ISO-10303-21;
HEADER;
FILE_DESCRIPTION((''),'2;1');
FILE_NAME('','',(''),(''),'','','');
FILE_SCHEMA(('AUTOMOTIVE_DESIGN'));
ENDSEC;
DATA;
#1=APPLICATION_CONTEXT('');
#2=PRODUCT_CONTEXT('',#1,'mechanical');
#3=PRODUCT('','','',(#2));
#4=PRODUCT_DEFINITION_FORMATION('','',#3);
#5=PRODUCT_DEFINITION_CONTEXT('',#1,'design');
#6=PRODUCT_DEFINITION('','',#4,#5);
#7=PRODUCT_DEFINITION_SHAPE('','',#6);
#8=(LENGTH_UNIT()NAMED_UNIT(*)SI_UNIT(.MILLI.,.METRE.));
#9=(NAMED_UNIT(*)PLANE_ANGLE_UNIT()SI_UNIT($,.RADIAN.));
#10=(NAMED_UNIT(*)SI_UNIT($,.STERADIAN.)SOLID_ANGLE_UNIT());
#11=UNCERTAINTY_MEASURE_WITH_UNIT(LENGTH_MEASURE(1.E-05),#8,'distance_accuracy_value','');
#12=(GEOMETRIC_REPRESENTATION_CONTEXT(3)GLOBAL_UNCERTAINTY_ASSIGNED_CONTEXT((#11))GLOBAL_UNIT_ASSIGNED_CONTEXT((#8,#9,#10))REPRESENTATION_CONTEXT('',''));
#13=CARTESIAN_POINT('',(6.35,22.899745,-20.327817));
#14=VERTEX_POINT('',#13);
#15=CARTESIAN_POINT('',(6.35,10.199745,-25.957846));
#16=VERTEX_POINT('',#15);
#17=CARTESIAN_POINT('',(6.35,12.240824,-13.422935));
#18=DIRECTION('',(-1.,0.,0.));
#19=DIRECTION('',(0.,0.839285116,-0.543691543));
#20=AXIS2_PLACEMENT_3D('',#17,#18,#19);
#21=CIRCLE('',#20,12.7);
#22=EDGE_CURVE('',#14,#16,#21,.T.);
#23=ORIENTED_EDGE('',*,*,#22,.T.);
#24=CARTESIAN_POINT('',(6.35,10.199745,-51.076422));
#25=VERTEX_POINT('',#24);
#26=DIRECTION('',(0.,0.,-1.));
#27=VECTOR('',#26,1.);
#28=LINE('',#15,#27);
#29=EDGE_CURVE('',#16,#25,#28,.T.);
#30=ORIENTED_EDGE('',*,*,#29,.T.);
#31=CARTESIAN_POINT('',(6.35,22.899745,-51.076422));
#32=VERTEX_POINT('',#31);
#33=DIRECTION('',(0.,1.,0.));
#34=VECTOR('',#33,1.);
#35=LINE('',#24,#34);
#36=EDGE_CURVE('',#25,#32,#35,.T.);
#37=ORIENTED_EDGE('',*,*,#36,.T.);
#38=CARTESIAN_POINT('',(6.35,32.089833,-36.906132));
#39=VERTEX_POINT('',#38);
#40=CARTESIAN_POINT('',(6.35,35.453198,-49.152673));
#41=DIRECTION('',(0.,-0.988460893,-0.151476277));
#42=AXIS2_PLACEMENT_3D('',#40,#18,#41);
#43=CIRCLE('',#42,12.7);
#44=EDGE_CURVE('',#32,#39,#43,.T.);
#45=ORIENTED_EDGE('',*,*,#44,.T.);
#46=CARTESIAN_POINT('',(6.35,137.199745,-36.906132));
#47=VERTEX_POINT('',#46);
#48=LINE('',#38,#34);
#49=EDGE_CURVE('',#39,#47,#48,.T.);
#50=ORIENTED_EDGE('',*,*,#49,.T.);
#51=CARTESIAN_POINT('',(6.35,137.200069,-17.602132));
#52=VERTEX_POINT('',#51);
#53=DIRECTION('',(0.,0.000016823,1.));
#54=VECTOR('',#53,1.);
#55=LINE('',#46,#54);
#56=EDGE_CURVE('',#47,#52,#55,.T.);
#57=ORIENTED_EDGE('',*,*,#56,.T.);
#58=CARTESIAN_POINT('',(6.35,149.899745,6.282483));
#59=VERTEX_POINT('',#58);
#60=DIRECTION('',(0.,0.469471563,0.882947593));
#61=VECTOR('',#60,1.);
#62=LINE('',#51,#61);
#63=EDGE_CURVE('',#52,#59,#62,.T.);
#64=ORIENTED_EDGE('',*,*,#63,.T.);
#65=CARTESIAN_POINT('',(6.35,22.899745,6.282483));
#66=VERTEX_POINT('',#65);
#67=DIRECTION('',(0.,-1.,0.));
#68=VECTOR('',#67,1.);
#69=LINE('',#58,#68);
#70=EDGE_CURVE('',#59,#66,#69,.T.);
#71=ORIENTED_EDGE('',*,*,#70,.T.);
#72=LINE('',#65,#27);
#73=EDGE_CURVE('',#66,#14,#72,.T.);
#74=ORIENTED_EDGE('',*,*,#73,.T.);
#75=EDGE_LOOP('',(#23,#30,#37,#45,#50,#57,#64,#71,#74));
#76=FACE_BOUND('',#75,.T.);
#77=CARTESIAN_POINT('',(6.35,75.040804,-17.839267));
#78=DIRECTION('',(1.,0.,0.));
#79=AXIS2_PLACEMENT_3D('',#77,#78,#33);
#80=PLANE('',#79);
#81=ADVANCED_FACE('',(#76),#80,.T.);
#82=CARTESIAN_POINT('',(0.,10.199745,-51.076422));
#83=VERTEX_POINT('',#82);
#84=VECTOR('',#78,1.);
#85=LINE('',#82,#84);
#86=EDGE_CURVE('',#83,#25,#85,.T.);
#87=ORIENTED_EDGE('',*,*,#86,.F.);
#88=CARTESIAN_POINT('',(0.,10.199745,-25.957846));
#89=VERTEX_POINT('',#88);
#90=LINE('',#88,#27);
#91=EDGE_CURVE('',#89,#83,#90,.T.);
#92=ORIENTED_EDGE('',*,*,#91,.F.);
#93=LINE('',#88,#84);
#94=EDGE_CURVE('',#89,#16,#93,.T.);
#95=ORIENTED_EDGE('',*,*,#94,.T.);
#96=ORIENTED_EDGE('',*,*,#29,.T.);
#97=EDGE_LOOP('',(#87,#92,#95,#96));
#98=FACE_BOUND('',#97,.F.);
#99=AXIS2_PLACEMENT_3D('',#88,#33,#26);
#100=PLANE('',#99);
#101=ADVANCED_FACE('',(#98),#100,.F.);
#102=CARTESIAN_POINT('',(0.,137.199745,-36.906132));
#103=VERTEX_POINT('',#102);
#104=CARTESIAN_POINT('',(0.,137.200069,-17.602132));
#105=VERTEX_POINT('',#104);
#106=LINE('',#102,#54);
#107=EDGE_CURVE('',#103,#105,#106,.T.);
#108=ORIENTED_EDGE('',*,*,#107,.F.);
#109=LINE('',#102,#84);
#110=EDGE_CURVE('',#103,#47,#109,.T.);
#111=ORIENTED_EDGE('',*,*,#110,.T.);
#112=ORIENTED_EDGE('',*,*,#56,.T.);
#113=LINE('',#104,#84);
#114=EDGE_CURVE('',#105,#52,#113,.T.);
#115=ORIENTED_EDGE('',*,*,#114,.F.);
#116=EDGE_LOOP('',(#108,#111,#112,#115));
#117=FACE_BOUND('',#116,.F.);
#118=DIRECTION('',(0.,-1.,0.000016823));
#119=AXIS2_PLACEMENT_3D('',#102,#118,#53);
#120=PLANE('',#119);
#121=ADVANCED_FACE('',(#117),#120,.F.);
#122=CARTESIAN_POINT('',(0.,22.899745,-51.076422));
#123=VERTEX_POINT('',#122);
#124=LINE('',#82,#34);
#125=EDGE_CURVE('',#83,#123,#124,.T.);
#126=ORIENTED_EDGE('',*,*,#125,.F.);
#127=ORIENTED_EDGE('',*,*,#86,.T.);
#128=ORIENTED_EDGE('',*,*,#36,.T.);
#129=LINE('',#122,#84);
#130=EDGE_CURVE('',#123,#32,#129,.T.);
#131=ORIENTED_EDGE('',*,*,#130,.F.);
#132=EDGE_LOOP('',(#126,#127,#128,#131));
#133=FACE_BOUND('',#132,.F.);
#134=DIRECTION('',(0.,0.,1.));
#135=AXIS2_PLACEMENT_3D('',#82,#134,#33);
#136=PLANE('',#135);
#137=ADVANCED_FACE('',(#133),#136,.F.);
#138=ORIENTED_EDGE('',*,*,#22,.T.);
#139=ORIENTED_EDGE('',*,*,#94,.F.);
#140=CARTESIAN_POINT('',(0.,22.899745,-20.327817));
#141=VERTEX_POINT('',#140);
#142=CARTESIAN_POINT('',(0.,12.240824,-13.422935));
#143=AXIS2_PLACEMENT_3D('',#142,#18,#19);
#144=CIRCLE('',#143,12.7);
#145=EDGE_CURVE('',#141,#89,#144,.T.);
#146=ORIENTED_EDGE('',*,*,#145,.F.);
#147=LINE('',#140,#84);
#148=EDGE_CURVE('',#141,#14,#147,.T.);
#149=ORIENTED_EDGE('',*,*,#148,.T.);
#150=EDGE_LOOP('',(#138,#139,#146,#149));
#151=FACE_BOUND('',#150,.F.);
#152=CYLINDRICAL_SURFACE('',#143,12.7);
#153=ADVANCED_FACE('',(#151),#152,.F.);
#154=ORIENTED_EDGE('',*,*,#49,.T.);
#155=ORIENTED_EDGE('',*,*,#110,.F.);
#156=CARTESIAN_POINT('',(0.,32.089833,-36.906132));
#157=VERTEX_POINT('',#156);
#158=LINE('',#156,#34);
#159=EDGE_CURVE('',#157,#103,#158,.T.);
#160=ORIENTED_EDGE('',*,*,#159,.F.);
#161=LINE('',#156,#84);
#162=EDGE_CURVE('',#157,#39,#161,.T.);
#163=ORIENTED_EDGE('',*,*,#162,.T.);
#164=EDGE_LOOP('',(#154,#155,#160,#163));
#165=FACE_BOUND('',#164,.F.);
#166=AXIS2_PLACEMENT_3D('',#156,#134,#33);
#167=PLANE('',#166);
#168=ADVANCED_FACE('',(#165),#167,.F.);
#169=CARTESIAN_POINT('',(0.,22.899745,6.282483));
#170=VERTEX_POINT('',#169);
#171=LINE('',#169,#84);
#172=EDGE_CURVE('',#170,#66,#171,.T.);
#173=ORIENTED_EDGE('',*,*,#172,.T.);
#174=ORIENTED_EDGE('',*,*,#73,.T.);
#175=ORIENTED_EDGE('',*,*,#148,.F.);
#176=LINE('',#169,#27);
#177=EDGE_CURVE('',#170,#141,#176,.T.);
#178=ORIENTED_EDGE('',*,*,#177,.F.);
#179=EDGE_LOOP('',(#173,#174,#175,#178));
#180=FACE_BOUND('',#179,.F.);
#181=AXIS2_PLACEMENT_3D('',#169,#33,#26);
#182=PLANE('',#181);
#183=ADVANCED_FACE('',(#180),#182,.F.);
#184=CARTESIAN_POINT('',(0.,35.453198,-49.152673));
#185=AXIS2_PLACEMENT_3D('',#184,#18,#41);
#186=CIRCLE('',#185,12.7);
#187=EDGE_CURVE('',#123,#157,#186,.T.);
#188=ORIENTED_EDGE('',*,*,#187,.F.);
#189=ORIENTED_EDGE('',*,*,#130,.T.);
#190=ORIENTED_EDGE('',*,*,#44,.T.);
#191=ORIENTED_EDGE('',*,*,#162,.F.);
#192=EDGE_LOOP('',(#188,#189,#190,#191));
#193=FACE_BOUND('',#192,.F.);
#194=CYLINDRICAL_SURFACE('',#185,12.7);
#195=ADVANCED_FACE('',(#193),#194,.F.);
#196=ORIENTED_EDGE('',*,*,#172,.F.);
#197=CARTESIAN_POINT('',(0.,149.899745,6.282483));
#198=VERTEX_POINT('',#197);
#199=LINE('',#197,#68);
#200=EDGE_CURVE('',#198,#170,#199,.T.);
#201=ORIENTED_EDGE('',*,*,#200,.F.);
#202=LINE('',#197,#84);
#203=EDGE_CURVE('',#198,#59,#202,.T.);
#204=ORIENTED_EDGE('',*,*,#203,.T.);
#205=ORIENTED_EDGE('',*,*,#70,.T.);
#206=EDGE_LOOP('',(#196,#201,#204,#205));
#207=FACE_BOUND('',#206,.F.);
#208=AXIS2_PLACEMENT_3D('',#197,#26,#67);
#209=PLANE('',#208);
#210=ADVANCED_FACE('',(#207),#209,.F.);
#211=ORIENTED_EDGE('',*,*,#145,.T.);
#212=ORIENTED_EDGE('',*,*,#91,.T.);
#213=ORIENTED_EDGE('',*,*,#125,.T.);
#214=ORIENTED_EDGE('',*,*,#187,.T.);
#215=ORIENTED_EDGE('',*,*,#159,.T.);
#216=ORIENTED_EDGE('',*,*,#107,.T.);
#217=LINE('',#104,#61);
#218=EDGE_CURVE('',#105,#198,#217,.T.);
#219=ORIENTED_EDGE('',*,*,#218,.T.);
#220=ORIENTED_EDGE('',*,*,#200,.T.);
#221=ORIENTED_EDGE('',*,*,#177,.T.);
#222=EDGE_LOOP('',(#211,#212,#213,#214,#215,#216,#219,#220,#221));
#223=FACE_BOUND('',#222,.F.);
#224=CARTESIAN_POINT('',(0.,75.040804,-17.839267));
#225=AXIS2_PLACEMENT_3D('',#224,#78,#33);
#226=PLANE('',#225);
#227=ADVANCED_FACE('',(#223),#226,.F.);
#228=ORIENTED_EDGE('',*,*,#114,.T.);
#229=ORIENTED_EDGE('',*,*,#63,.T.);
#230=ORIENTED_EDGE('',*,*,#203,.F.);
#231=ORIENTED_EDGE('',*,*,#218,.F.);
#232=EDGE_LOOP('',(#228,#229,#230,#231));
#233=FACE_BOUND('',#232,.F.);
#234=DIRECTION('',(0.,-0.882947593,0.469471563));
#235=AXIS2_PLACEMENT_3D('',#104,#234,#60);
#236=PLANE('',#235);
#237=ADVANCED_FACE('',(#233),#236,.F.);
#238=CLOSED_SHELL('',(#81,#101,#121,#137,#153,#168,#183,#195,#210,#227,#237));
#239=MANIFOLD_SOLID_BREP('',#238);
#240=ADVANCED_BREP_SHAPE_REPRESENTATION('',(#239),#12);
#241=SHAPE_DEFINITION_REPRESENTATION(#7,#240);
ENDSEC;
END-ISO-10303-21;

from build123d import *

# Parameters (mm, degrees)
F1_DEPTH = 6.35


# Not quite as in the source:
# - a feature names something its author has since deleted; it is built from what else it names


with BuildPart() as f1:
    # F0 (on Right) → F1 (new body)
    with BuildSketch(Plane.YZ):
        with BuildLine():
            Line((10.1997445822, -25.9578457783), (10.1997445822, -51.0764221646))
            Line((10.1997445822, -51.0764221646), (22.8997445822, -51.0764221646))
            ThreePointArc((22.8997445822, -51.0764221646), (24.7978912955, -42.2422146629), (32.0898325185, -36.9061321742))
            Line((32.0898325185, -36.9061321742), (137.1997445822, -36.9061321742))
            Line((137.1997445822, -36.9061321742), (137.2000693373, -17.6021321769))
            Line((137.2000693373, -17.6021321769), (149.8997445822, 6.2824831575))
            Line((149.8997445822, 6.2824831575), (137.1997445822, 6.2824831575))
            Line((137.1997445822, 6.2824831575), (22.8997445822, 6.2824831575))
            Line((22.8997445822, 6.2824831575), (22.8997445822, -20.3278172679))
            ThreePointArc((22.8997445822, -20.3278172679), (17.3877746683, -25.0332272954), (10.1997445822, -25.9578457783))
        make_face()
    extrude(amount=F1_DEPTH)


solid = f1.part
